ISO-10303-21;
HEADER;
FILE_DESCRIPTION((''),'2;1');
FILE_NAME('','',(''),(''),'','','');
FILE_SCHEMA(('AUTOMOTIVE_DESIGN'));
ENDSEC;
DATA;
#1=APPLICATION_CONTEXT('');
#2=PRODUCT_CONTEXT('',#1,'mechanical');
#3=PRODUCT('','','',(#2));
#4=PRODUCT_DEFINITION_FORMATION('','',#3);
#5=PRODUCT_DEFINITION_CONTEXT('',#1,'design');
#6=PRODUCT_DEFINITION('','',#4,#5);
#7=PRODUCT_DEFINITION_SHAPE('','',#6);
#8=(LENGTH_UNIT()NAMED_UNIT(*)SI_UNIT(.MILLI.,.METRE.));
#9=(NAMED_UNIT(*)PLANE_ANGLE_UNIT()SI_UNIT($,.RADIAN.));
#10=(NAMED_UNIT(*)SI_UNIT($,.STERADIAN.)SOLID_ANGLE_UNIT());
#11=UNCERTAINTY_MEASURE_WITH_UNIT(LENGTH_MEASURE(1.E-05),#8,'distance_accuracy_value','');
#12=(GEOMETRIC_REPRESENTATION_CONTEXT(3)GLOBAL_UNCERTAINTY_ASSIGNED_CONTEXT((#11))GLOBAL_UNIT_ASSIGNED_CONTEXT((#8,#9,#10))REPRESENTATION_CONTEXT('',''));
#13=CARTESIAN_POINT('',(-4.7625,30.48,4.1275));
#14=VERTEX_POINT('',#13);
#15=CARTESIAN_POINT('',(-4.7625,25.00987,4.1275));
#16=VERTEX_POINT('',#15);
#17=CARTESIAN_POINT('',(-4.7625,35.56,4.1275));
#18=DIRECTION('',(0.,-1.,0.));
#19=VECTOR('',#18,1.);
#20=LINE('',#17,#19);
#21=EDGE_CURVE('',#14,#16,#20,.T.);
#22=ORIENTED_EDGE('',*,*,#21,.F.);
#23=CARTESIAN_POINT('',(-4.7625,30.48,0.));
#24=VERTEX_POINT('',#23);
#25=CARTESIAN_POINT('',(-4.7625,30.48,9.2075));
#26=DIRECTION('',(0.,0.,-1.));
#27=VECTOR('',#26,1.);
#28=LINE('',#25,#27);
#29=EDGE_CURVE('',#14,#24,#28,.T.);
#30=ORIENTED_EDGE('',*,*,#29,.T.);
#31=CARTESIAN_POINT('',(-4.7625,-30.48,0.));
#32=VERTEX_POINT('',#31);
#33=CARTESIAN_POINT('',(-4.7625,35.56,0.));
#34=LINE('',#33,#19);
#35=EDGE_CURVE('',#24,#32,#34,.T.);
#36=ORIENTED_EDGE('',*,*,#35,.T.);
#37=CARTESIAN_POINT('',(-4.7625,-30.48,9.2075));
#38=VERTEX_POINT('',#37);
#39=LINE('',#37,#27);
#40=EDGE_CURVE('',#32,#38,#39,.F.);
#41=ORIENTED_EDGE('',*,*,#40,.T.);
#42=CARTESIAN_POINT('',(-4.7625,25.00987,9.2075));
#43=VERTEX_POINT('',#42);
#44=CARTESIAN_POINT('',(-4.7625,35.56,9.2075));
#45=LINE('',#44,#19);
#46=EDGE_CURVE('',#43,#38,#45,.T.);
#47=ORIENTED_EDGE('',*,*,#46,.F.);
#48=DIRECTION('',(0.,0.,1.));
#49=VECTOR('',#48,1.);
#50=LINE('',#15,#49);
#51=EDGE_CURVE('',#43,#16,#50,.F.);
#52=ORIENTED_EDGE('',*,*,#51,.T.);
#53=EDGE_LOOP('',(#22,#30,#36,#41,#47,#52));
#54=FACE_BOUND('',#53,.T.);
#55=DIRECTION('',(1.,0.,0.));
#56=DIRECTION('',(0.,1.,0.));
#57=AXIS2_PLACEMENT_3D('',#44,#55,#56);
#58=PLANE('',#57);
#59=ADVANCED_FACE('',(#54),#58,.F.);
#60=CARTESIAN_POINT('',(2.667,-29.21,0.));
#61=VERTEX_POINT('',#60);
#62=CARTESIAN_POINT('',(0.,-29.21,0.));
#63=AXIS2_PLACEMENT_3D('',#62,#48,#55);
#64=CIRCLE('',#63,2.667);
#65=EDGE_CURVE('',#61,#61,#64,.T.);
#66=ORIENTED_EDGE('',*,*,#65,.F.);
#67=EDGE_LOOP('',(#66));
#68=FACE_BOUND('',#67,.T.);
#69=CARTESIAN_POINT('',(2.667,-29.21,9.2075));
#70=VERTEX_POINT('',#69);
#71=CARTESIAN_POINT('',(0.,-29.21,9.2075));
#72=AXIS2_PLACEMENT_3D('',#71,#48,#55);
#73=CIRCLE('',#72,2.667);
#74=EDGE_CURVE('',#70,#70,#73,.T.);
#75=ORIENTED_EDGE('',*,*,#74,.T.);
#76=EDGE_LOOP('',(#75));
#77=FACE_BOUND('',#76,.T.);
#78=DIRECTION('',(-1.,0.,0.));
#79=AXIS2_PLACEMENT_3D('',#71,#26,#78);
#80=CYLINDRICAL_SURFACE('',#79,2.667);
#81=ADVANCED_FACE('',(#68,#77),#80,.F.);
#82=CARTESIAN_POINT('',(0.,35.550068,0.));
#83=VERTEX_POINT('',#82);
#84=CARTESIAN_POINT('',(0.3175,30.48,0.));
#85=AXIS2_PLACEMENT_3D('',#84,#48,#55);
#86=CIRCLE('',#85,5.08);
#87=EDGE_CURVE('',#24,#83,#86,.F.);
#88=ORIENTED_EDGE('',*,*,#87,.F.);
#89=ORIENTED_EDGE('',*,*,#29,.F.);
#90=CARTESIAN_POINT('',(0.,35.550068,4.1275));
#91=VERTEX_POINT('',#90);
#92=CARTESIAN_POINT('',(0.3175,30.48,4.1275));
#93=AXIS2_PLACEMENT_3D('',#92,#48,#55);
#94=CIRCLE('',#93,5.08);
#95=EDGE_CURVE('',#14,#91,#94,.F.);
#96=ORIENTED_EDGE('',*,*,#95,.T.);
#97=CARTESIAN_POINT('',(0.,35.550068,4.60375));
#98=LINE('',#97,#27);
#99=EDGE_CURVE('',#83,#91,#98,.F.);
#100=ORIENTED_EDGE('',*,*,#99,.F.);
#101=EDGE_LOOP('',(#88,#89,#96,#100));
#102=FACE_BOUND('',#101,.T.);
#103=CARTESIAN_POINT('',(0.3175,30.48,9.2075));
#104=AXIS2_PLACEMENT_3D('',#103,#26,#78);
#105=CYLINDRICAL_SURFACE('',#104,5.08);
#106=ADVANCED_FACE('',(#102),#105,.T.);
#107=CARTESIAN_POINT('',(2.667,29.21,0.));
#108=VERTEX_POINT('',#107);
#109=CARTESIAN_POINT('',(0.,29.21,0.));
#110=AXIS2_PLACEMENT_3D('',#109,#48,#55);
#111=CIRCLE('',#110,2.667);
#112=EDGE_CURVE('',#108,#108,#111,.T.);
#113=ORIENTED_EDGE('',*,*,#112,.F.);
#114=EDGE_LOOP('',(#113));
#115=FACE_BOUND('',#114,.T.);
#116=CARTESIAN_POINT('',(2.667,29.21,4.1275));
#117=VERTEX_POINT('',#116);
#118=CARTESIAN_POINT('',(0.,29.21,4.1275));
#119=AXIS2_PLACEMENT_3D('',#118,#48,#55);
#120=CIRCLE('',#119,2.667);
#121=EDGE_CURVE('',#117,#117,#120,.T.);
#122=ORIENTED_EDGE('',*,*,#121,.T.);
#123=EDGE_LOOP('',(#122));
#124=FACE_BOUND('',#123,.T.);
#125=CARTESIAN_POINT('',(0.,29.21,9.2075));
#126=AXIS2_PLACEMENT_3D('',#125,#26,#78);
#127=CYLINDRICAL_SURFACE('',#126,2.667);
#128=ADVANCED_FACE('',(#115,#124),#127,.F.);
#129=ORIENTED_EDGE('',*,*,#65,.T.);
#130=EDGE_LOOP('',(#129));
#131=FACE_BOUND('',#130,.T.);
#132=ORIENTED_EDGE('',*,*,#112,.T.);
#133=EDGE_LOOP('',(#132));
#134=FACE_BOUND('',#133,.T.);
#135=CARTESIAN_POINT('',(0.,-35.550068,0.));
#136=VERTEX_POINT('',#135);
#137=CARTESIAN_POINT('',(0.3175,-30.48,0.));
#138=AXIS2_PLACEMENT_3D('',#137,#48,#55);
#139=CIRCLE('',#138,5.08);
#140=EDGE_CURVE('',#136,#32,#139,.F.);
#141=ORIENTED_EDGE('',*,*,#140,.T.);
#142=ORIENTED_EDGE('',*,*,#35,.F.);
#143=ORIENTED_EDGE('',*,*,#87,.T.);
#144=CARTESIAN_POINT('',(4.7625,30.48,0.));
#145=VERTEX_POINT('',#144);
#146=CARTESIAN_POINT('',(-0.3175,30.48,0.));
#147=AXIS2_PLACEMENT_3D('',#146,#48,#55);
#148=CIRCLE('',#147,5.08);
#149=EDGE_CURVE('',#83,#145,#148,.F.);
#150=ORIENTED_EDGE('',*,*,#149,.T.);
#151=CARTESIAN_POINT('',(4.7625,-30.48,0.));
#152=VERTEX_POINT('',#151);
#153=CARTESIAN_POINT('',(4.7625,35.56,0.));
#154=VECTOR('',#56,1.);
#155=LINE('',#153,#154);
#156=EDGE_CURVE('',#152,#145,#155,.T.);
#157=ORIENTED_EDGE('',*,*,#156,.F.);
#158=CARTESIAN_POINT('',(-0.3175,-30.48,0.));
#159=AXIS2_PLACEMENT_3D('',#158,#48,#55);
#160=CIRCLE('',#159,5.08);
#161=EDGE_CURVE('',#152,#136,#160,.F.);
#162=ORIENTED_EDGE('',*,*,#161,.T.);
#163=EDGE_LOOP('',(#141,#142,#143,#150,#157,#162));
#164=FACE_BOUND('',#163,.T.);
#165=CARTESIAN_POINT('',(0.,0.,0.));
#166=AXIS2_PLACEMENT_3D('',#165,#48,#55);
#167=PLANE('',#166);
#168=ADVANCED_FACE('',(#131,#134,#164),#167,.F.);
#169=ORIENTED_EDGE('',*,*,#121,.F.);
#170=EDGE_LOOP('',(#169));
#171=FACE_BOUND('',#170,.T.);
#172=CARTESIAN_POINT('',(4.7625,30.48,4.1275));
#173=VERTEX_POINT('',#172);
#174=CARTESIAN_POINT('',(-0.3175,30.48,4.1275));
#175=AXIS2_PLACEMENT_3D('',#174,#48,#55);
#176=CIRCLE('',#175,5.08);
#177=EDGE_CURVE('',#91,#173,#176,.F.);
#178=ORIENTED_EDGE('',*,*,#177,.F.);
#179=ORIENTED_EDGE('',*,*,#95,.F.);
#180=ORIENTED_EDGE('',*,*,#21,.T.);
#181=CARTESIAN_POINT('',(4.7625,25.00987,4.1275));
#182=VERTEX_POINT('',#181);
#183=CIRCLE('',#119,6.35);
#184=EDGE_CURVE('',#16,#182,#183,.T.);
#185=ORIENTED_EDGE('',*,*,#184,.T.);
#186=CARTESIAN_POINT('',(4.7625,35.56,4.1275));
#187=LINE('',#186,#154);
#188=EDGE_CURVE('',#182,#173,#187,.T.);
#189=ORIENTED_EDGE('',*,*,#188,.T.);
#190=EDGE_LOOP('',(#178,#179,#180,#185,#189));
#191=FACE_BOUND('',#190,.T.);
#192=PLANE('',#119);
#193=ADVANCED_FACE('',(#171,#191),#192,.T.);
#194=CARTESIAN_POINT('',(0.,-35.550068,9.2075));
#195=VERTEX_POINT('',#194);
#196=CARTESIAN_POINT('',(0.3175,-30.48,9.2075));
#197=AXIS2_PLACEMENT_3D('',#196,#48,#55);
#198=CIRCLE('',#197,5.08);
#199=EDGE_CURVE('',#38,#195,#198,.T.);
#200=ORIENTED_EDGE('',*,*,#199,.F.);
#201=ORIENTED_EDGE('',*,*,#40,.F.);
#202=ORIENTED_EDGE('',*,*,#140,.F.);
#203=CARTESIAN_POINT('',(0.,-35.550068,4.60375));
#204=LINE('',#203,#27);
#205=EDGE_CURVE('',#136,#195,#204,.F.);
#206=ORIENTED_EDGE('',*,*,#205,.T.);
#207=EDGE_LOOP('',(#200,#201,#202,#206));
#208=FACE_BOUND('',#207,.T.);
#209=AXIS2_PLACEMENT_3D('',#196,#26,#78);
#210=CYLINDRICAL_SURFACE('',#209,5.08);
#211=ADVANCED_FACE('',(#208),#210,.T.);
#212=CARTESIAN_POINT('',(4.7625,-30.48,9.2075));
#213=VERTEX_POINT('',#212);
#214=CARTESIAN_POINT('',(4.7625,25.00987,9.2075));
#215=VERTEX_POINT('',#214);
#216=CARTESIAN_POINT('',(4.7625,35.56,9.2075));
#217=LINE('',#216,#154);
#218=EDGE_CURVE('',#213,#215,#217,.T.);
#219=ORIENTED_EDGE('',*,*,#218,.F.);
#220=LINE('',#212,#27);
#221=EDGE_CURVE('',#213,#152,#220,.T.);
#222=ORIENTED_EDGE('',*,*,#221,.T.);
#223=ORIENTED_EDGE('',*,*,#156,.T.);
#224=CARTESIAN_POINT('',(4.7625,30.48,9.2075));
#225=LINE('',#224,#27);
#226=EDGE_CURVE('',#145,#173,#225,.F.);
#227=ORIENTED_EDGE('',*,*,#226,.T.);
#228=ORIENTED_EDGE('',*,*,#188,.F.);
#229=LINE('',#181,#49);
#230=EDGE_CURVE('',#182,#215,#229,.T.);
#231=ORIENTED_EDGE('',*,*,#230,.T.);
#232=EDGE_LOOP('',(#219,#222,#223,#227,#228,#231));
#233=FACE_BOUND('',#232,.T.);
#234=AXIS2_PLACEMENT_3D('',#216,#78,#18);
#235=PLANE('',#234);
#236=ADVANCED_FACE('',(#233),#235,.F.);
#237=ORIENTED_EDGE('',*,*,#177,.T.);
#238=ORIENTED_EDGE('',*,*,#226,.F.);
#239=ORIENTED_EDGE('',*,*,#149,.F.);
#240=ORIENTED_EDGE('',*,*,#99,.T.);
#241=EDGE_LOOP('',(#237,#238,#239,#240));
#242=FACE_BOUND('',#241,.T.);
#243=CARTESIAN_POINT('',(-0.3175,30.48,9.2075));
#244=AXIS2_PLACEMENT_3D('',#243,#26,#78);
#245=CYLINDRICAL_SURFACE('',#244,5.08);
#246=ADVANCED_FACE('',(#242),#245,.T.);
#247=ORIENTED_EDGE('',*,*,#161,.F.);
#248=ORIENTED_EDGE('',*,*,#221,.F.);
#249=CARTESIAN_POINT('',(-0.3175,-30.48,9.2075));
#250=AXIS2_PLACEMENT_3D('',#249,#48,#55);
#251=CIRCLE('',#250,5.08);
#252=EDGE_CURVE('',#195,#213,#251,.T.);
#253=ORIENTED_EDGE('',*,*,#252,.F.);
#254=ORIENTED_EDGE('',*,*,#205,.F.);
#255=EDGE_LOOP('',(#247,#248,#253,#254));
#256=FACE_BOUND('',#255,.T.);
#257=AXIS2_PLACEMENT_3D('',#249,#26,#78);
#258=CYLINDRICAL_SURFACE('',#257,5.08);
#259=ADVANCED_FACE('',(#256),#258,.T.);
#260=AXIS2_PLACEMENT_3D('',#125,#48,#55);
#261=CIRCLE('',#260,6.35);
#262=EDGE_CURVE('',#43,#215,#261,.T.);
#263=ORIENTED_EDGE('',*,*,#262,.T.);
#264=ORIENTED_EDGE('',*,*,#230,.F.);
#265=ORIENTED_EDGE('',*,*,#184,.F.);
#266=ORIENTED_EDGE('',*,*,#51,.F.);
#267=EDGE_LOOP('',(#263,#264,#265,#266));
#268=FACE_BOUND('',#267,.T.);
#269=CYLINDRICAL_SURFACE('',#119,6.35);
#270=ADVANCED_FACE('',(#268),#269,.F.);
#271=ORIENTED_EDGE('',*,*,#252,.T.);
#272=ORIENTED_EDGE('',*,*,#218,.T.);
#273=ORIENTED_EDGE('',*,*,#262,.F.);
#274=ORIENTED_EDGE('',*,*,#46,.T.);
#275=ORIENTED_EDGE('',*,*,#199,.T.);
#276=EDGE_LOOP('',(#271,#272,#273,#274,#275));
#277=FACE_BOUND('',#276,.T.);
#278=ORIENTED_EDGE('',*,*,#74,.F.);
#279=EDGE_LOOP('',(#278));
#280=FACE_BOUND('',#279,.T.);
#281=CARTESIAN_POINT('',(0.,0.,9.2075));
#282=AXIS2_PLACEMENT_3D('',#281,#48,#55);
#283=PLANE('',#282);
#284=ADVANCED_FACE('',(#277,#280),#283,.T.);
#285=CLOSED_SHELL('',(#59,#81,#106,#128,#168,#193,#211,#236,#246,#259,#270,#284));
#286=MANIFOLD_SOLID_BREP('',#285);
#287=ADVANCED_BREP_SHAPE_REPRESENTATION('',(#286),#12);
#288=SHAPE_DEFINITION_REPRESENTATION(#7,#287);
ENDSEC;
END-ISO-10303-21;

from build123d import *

# Parameters (mm, degrees)
SKETCH1_W           = 9.525
SKETCH1_H           = 71.12
SKETCH1_R           = 2.667
BOSS_EXTRUDE1_DEPTH = 9.2075
FILLET1_R           = 5.08
SKETCH2_R           = 6.35
CUT_EXTRUDE1_DEPTH  = 5.08


with BuildPart() as part:
    # Sketch1 → Boss-Extrude1 (new body)
    with BuildSketch(Plane.XY):
        Rectangle(SKETCH1_W, SKETCH1_H)
        with Locations((0, -29.21)):
            Circle(SKETCH1_R, mode=Mode.SUBTRACT)
        with Locations((0, 29.21)):
            Circle(SKETCH1_R, mode=Mode.SUBTRACT)
    extrude(amount=BOSS_EXTRUDE1_DEPTH)

    # Fillet1
    # the kernel refuses this fillet: 5.08 mm, written as the material it takes off along each edge
    with BuildSketch(Plane(origin=(-4.7625, -35.56, -12.7), x_dir=(1, 0, 0), z_dir=(0, 0, 1)), Plane(origin=(4.7625, -35.56, -12.7), x_dir=(0, 1, 0), z_dir=(0, 0, 1)), Plane(origin=(4.7625, 35.56, -12.7), x_dir=(-1, 0, 0), z_dir=(0, 0, 1))) as fillet1_piece_1:
        with BuildLine():
            CenterArc((FILLET1_R, FILLET1_R), FILLET1_R, 180, 90)
            Line((0, FILLET1_R), (0, 0))
            Line((0, 0), (FILLET1_R, 0))
        make_face()
    extrude(amount=34.6075, mode=Mode.SUBTRACT)
    with BuildSketch(Plane(origin=(-4.7625, 35.56, -12.7), x_dir=(1, 0, 0), z_dir=(0, 0, 1))) as fillet1_piece_2:
        with BuildLine():
            CenterArc((FILLET1_R, -FILLET1_R), FILLET1_R, 90, 90)
            Line((0, -FILLET1_R), (0, 0))
            Line((0, 0), (FILLET1_R, 0))
        make_face()
    extrude(amount=34.6075, mode=Mode.SUBTRACT)

    # Sketch2 → Cut-Extrude1 (cut)
    with BuildSketch(Plane.XY.offset(9.2075)):
        with Locations((0, 29.21)):
            Circle(SKETCH2_R)
    extrude(amount=-CUT_EXTRUDE1_DEPTH, mode=Mode.SUBTRACT)


solid = part.part
